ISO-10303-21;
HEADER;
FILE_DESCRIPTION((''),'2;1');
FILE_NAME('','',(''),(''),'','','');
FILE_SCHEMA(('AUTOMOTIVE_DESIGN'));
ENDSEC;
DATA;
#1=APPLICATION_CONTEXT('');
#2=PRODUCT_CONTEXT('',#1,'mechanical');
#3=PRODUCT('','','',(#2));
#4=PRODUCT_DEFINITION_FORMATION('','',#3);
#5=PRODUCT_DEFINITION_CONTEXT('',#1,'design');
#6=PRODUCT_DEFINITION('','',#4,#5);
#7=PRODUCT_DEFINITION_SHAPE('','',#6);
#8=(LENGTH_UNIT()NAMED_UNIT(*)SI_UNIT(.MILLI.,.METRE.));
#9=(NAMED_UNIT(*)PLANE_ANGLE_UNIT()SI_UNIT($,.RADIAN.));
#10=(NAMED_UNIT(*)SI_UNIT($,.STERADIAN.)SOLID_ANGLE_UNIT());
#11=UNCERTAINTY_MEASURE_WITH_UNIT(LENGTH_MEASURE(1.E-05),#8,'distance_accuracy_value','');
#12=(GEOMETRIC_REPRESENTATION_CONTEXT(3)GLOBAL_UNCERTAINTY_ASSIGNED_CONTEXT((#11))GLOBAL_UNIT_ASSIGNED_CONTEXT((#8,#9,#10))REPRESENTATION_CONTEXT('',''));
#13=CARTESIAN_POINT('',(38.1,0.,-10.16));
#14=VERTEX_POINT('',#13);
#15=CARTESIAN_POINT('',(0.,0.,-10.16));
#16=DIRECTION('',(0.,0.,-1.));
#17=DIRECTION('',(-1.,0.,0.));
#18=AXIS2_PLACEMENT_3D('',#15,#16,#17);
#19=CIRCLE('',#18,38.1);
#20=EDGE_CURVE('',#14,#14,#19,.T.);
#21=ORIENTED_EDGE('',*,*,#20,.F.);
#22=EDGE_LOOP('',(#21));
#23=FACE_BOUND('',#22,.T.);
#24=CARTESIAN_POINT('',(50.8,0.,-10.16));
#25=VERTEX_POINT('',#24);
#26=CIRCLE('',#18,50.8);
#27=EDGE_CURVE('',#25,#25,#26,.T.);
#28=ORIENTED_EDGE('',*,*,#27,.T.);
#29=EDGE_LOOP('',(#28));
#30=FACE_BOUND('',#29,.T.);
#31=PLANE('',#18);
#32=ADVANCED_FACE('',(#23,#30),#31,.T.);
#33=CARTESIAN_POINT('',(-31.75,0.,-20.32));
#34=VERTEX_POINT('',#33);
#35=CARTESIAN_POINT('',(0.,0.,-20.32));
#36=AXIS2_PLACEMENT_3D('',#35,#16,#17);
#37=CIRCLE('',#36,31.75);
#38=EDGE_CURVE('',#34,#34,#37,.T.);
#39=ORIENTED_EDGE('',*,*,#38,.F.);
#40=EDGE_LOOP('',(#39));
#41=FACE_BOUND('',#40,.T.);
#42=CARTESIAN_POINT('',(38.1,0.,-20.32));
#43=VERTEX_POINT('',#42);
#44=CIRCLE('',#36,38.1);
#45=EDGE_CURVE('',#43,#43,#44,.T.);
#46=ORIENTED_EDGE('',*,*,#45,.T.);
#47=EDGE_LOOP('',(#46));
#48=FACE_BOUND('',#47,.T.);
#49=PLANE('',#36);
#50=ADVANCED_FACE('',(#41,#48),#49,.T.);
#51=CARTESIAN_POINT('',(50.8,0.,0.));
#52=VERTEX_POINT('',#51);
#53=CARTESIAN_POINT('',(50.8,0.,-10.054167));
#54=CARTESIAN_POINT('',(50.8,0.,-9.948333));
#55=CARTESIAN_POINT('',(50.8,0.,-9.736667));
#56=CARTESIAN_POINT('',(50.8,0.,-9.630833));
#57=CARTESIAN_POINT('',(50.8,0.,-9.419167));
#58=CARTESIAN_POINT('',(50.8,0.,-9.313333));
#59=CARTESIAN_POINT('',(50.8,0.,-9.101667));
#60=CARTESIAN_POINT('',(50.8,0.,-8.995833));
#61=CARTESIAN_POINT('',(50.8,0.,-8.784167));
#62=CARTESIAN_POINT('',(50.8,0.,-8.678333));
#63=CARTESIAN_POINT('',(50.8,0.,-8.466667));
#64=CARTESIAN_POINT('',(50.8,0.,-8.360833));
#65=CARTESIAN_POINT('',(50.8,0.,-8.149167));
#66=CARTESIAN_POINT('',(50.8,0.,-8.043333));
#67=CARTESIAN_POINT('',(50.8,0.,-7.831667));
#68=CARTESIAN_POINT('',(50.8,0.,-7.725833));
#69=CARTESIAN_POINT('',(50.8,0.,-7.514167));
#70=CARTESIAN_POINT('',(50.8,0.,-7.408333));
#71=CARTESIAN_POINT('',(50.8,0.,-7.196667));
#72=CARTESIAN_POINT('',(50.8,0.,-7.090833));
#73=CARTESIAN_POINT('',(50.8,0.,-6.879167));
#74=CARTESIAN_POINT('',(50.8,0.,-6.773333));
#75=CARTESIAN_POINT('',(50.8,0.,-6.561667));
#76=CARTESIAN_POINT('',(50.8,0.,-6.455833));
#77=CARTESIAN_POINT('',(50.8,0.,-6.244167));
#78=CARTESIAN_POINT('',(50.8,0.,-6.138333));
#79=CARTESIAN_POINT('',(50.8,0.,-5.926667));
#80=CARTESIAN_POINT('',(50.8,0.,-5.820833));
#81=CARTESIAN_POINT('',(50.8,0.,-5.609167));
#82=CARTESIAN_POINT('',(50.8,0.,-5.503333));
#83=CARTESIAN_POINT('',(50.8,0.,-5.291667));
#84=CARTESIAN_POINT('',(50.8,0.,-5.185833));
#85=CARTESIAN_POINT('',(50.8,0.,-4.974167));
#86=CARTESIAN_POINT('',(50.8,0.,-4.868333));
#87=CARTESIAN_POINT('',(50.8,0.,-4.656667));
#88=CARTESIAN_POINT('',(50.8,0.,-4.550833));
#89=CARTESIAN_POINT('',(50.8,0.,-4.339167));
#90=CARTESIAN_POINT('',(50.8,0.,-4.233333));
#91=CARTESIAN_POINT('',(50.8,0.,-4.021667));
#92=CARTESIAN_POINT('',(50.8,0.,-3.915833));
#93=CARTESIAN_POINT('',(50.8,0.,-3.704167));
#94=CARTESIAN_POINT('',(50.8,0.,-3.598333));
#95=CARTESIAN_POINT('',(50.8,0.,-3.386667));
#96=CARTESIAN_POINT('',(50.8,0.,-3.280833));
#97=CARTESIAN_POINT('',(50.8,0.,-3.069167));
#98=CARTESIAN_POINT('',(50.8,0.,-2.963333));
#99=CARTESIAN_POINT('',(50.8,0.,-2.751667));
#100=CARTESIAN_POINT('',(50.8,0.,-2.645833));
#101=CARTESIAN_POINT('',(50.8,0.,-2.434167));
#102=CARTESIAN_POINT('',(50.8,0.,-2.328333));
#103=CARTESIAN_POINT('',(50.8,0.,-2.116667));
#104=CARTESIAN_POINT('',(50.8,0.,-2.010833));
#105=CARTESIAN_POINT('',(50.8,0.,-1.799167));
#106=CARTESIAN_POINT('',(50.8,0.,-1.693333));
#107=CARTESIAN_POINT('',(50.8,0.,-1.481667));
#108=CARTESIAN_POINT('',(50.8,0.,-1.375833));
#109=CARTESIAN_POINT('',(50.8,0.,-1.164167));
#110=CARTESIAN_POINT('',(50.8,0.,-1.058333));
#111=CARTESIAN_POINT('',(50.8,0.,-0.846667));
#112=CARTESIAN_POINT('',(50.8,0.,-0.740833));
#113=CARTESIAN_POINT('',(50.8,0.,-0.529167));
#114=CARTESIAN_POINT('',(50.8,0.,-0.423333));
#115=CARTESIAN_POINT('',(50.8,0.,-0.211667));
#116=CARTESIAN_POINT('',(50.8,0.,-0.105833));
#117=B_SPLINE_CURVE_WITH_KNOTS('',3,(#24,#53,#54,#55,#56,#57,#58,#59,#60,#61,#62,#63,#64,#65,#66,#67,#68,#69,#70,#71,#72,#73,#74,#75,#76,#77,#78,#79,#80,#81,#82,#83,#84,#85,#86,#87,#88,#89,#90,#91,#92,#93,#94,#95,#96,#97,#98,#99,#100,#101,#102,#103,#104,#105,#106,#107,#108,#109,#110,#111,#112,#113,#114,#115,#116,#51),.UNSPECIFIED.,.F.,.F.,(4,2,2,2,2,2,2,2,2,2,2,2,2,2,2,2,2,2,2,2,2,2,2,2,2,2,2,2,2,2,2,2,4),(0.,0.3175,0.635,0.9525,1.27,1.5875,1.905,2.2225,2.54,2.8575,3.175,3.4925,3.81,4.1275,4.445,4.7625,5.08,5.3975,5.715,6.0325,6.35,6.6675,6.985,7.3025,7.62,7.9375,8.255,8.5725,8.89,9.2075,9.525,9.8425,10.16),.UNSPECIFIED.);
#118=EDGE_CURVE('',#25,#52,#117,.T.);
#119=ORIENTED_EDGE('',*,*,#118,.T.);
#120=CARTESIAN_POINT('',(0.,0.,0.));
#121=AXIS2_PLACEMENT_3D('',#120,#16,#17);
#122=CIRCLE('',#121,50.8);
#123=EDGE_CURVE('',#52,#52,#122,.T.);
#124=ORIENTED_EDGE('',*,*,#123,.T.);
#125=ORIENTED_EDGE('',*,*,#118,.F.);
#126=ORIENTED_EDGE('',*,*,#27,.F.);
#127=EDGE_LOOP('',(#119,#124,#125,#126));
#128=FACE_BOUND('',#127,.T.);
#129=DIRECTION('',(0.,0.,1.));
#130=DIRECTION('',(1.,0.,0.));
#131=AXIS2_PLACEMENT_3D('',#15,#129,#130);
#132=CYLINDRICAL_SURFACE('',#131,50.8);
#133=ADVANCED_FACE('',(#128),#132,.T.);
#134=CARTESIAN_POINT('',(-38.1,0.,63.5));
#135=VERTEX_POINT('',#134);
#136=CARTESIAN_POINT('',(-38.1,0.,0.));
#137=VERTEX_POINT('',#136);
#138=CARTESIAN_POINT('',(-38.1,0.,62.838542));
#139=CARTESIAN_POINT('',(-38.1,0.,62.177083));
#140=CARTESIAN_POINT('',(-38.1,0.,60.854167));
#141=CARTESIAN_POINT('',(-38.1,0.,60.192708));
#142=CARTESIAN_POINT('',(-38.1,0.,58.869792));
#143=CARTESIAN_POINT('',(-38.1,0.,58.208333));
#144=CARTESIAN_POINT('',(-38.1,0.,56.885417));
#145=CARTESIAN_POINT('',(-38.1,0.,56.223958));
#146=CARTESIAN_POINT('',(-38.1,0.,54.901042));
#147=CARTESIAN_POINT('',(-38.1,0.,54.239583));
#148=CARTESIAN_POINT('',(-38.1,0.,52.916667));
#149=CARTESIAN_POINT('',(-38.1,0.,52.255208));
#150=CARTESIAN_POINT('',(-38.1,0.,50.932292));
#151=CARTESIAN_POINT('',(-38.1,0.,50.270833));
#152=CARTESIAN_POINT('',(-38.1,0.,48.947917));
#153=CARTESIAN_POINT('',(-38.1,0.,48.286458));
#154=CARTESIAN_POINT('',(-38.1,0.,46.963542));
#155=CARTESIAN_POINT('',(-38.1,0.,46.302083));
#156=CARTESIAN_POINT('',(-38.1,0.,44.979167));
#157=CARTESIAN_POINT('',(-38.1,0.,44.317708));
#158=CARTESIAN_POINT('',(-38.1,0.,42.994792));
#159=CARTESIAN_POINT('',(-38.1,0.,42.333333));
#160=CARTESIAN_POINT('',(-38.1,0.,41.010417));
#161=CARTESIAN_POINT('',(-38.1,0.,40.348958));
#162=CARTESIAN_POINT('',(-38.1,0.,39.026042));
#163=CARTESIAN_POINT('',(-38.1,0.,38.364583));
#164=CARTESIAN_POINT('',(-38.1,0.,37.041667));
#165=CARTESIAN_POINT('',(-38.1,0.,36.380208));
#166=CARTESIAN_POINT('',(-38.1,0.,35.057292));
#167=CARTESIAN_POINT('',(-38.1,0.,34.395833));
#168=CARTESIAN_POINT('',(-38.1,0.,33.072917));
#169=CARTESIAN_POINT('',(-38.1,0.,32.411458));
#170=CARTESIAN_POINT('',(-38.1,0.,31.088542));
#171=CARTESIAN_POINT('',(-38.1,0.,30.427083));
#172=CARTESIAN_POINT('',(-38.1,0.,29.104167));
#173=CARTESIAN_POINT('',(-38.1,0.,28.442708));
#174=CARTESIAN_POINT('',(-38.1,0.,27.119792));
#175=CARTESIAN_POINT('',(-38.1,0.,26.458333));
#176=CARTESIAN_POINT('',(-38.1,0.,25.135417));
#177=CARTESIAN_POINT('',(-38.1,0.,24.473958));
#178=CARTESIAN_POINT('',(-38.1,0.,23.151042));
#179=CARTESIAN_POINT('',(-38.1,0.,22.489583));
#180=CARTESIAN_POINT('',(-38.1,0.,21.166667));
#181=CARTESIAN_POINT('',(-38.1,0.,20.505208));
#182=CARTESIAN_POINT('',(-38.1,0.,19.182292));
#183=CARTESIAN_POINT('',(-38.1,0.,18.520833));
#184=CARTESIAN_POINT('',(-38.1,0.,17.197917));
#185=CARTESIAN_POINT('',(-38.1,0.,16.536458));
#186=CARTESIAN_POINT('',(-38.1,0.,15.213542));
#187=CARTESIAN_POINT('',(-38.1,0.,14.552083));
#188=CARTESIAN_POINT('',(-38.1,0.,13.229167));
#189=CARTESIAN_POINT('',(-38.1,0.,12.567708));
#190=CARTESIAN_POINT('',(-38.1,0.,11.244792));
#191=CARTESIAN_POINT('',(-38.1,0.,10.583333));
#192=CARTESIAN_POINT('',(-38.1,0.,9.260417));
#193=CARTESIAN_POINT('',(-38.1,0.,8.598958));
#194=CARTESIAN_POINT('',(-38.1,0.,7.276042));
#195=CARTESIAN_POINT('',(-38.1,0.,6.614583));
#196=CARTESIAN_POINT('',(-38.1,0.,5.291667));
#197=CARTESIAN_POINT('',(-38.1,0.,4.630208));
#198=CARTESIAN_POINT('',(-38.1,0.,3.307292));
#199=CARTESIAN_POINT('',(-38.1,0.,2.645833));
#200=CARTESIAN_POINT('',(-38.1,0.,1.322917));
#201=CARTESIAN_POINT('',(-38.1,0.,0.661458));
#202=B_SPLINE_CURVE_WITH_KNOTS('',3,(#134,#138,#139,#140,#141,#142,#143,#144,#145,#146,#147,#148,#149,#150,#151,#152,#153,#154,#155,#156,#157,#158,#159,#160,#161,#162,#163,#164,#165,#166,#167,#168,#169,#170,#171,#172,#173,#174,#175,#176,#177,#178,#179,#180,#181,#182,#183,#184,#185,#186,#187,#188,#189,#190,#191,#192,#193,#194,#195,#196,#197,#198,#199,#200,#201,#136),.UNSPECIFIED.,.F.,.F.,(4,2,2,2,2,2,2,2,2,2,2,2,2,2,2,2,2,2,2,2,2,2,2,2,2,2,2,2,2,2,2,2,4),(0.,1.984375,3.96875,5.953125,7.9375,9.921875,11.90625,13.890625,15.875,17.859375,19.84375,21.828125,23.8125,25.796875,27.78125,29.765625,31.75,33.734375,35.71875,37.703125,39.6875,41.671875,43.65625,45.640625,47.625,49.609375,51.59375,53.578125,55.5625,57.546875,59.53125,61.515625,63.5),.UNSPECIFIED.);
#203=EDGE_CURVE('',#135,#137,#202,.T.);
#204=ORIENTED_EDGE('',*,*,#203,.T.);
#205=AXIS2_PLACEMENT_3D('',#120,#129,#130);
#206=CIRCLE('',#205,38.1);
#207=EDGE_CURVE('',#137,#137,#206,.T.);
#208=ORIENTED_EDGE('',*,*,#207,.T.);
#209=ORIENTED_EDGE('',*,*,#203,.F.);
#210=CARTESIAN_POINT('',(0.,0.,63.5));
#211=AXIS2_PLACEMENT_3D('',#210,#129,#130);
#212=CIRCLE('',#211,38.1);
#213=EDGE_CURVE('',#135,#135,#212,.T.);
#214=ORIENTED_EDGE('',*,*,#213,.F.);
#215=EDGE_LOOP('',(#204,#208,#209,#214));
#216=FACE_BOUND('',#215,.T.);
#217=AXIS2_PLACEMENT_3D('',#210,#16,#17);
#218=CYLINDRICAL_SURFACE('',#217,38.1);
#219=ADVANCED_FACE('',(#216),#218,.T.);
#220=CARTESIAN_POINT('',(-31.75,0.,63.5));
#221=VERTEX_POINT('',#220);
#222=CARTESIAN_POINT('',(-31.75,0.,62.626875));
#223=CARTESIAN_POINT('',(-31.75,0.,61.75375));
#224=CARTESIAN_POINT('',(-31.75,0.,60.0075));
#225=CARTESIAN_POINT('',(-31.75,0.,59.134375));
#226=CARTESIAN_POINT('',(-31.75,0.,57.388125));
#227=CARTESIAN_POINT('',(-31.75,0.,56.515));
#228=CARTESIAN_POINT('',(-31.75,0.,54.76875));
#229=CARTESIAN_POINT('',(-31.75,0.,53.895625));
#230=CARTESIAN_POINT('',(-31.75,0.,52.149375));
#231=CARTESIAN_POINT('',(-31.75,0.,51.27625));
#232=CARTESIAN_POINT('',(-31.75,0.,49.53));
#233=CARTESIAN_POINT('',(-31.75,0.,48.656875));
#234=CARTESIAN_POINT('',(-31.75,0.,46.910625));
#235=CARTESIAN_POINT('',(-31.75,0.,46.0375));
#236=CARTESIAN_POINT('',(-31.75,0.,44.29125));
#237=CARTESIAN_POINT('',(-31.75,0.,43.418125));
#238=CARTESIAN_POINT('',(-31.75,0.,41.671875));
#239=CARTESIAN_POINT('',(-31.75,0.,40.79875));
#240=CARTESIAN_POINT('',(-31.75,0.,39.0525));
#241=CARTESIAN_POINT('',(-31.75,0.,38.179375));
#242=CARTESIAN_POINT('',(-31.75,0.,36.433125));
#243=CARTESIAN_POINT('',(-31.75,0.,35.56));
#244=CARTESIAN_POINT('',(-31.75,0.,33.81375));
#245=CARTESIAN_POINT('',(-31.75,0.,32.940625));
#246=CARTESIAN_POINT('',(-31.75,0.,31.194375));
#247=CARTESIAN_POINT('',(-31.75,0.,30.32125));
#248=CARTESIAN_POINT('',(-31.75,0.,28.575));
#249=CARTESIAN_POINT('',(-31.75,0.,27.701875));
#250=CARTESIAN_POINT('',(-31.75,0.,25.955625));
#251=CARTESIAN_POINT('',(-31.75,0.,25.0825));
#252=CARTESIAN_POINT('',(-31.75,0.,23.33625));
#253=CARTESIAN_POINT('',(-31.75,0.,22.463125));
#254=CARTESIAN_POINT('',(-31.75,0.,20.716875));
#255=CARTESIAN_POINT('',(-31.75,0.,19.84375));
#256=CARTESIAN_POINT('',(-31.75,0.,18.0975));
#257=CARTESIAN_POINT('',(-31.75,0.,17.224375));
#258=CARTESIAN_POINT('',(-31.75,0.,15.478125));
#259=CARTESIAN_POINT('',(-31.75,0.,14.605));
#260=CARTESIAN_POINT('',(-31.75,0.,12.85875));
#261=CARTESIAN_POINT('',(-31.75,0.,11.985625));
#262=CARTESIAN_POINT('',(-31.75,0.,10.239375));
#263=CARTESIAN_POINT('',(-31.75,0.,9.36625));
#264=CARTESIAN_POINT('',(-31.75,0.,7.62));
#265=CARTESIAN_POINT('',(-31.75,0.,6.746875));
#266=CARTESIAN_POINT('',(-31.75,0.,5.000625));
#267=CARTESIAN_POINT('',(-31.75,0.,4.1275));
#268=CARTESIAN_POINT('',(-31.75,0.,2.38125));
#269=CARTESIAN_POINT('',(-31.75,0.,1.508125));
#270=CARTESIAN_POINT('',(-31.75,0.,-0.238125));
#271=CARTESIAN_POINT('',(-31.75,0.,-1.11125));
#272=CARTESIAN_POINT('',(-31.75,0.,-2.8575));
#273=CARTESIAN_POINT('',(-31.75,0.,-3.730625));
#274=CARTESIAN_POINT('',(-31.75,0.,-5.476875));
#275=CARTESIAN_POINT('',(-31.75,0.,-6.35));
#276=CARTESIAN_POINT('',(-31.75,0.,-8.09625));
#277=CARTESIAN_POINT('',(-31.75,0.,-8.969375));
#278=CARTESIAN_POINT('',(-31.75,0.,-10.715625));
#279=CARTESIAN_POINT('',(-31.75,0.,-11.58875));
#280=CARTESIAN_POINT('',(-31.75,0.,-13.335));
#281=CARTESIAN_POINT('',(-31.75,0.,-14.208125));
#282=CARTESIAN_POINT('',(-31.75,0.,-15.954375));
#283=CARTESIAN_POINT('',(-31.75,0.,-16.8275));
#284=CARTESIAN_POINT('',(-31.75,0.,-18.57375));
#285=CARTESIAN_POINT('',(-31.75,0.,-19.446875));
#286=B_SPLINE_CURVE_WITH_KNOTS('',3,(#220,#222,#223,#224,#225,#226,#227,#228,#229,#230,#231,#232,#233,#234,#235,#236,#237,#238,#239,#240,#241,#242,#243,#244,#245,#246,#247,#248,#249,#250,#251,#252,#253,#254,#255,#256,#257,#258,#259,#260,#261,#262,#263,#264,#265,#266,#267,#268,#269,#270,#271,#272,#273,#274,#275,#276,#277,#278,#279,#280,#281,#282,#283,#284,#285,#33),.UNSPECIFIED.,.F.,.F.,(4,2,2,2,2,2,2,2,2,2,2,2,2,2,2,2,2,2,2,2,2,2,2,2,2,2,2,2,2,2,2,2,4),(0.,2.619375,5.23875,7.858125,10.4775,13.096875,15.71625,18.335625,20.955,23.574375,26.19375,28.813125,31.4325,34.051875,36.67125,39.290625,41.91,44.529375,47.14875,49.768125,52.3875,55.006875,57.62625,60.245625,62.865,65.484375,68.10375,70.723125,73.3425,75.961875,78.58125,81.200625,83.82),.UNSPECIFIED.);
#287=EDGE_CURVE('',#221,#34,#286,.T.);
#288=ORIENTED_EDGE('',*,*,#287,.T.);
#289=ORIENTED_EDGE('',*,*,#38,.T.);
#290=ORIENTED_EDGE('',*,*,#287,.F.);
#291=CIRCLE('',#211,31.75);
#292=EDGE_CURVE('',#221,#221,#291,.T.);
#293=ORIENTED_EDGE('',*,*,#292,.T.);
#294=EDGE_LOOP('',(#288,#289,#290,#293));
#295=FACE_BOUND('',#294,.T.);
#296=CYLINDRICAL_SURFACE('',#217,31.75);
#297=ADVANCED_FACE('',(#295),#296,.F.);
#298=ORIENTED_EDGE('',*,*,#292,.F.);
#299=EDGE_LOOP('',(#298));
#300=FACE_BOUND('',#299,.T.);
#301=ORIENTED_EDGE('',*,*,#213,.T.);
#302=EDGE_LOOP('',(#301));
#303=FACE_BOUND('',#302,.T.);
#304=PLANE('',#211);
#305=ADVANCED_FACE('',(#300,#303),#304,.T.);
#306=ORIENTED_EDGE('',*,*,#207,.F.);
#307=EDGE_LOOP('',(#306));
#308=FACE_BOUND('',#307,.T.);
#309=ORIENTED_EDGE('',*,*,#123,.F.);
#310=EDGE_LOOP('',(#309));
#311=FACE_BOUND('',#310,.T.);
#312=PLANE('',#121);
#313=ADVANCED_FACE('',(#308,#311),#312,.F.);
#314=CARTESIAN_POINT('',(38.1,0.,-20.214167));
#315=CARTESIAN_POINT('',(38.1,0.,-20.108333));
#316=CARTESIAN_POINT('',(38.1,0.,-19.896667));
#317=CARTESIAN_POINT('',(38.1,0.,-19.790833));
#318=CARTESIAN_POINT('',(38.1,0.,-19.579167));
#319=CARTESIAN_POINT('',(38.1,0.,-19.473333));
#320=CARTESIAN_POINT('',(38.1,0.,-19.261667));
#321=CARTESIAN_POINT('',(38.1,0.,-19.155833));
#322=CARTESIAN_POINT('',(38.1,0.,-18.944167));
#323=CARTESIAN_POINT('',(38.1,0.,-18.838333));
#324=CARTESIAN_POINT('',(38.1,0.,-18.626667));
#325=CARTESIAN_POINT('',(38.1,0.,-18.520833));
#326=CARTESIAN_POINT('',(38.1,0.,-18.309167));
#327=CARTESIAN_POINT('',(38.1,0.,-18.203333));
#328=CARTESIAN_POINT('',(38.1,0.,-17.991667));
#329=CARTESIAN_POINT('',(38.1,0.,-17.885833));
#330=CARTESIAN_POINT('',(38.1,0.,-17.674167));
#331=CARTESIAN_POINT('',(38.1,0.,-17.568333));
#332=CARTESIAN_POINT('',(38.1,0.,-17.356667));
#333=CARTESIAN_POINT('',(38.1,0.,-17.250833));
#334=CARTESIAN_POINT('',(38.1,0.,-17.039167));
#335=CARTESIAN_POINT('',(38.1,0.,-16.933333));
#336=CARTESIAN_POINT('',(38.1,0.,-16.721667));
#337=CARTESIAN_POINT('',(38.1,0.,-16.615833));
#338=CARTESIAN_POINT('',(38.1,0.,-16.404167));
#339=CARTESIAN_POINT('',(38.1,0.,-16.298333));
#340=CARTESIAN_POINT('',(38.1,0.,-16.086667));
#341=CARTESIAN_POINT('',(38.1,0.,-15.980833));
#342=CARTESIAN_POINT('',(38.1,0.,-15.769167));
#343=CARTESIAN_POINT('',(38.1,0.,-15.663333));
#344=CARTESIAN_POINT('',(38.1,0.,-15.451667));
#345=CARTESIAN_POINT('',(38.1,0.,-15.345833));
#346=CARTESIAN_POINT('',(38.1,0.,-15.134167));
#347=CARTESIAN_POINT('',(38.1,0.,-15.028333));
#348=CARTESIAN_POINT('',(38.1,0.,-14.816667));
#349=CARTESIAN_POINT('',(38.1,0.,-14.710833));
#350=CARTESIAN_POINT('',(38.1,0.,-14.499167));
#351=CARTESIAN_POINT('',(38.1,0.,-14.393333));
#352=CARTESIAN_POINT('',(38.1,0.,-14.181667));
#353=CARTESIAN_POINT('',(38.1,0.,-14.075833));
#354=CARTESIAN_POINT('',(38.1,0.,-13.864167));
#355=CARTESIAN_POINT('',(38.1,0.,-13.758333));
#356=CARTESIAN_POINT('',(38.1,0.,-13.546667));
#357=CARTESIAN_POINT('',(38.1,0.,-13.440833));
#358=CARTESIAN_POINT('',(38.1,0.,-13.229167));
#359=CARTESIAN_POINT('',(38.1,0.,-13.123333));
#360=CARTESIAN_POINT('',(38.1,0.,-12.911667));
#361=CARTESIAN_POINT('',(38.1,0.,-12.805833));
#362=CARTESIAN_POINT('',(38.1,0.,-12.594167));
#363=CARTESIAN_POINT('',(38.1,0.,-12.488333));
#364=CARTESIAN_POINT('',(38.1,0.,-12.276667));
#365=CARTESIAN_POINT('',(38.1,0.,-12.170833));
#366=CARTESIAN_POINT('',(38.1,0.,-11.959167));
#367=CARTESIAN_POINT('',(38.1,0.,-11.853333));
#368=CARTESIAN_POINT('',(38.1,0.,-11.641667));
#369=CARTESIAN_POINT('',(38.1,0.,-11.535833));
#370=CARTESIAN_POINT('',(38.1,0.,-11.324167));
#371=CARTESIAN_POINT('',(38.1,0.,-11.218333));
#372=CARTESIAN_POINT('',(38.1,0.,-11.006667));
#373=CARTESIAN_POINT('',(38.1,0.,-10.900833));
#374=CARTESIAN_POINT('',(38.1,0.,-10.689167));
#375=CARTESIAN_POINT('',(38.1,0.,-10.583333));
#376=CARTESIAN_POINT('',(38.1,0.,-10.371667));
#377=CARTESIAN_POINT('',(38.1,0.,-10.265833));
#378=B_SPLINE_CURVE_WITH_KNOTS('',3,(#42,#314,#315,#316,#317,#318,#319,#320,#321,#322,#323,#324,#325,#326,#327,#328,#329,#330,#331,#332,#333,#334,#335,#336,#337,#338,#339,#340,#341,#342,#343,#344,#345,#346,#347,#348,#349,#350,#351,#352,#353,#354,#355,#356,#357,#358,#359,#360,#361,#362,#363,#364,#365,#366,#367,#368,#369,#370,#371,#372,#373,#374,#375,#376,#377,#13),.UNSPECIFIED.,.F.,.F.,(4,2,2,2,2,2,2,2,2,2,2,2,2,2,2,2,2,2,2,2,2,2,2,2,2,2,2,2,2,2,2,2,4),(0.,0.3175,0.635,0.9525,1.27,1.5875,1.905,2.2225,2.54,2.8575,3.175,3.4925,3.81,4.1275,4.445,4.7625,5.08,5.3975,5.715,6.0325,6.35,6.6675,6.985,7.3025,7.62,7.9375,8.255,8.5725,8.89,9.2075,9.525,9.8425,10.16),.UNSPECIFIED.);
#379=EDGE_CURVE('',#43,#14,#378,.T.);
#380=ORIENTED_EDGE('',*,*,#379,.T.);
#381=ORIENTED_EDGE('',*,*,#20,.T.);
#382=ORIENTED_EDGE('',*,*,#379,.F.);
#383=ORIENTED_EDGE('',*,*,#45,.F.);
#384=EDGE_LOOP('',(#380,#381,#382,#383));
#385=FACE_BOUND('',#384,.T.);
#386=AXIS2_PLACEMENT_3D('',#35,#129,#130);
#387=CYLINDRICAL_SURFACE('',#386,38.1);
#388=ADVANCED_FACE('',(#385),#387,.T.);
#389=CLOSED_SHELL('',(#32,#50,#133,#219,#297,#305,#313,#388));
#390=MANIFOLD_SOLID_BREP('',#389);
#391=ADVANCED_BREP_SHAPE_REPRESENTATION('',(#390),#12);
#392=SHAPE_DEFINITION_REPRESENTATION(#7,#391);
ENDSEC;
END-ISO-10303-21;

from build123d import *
from build123d.topology import SkipClean

# Parameters (mm, degrees)
SKETCH1_R               = 38.1
SKETCH1_R_2             = 31.75
BOSS_EXTRUDE1_DEPTH     = 63.5
SKETCH2_R               = 50.8
BOSS_EXTRUDE2_DEPTH     = 10.16
CUT_EXTRUDE2_DEPTH      = 53.34
CUT_EXTRUDE2_DEPTH_BACK = 96.882897328
SKETCH3_R               = 31.75
BOSS_EXTRUDE3_START     = 10.16
SKETCH4_R               = 38.1
SKETCH4_R_2             = 31.75
BOSS_EXTRUDE3_DEPTH     = 10.16


with BuildPart() as part:
    # Sketch1 → Boss-Extrude1 (new body)
    with BuildSketch(Plane.XY):
        Circle(SKETCH1_R)
        Circle(SKETCH1_R_2, mode=Mode.SUBTRACT)
    extrude(amount=BOSS_EXTRUDE1_DEPTH)

    # Sketch2 → Boss-Extrude2 (add)
    with BuildSketch(Plane(origin=(0, 0, 0), x_dir=(-1, 0, 0), z_dir=(0, 0, -1))):
        Circle(SKETCH2_R)
    extrude(amount=BOSS_EXTRUDE2_DEPTH)

    # Sketch3 → Cut-Extrude2 (cut, two sides: drawn at the far end of the back side and taken through both)
    with SkipClean():  # the faces are left unmerged after this step: merging them gives an invalid solid
        with BuildSketch(Plane(origin=(0, 0, 0), x_dir=(-1, 0, 0), z_dir=(0, 0, -1)).offset(-CUT_EXTRUDE2_DEPTH_BACK)):
            Circle(SKETCH3_R)
        extrude(amount=CUT_EXTRUDE2_DEPTH + CUT_EXTRUDE2_DEPTH_BACK, mode=Mode.SUBTRACT)
    add(part.part.scale(1), mode=Mode.REPLACE)  # the faces are merged on a copy

    # Sketch4 → Boss-Extrude3 (add)
    with BuildSketch(Plane(origin=(0, 0, -10.16), x_dir=(-1, 0, 0), z_dir=(0, 0, -1)).offset(BOSS_EXTRUDE3_START)):
        Circle(SKETCH4_R)
        Circle(SKETCH4_R_2, mode=Mode.SUBTRACT)
    extrude(amount=-BOSS_EXTRUDE3_DEPTH)


solid = part.part
